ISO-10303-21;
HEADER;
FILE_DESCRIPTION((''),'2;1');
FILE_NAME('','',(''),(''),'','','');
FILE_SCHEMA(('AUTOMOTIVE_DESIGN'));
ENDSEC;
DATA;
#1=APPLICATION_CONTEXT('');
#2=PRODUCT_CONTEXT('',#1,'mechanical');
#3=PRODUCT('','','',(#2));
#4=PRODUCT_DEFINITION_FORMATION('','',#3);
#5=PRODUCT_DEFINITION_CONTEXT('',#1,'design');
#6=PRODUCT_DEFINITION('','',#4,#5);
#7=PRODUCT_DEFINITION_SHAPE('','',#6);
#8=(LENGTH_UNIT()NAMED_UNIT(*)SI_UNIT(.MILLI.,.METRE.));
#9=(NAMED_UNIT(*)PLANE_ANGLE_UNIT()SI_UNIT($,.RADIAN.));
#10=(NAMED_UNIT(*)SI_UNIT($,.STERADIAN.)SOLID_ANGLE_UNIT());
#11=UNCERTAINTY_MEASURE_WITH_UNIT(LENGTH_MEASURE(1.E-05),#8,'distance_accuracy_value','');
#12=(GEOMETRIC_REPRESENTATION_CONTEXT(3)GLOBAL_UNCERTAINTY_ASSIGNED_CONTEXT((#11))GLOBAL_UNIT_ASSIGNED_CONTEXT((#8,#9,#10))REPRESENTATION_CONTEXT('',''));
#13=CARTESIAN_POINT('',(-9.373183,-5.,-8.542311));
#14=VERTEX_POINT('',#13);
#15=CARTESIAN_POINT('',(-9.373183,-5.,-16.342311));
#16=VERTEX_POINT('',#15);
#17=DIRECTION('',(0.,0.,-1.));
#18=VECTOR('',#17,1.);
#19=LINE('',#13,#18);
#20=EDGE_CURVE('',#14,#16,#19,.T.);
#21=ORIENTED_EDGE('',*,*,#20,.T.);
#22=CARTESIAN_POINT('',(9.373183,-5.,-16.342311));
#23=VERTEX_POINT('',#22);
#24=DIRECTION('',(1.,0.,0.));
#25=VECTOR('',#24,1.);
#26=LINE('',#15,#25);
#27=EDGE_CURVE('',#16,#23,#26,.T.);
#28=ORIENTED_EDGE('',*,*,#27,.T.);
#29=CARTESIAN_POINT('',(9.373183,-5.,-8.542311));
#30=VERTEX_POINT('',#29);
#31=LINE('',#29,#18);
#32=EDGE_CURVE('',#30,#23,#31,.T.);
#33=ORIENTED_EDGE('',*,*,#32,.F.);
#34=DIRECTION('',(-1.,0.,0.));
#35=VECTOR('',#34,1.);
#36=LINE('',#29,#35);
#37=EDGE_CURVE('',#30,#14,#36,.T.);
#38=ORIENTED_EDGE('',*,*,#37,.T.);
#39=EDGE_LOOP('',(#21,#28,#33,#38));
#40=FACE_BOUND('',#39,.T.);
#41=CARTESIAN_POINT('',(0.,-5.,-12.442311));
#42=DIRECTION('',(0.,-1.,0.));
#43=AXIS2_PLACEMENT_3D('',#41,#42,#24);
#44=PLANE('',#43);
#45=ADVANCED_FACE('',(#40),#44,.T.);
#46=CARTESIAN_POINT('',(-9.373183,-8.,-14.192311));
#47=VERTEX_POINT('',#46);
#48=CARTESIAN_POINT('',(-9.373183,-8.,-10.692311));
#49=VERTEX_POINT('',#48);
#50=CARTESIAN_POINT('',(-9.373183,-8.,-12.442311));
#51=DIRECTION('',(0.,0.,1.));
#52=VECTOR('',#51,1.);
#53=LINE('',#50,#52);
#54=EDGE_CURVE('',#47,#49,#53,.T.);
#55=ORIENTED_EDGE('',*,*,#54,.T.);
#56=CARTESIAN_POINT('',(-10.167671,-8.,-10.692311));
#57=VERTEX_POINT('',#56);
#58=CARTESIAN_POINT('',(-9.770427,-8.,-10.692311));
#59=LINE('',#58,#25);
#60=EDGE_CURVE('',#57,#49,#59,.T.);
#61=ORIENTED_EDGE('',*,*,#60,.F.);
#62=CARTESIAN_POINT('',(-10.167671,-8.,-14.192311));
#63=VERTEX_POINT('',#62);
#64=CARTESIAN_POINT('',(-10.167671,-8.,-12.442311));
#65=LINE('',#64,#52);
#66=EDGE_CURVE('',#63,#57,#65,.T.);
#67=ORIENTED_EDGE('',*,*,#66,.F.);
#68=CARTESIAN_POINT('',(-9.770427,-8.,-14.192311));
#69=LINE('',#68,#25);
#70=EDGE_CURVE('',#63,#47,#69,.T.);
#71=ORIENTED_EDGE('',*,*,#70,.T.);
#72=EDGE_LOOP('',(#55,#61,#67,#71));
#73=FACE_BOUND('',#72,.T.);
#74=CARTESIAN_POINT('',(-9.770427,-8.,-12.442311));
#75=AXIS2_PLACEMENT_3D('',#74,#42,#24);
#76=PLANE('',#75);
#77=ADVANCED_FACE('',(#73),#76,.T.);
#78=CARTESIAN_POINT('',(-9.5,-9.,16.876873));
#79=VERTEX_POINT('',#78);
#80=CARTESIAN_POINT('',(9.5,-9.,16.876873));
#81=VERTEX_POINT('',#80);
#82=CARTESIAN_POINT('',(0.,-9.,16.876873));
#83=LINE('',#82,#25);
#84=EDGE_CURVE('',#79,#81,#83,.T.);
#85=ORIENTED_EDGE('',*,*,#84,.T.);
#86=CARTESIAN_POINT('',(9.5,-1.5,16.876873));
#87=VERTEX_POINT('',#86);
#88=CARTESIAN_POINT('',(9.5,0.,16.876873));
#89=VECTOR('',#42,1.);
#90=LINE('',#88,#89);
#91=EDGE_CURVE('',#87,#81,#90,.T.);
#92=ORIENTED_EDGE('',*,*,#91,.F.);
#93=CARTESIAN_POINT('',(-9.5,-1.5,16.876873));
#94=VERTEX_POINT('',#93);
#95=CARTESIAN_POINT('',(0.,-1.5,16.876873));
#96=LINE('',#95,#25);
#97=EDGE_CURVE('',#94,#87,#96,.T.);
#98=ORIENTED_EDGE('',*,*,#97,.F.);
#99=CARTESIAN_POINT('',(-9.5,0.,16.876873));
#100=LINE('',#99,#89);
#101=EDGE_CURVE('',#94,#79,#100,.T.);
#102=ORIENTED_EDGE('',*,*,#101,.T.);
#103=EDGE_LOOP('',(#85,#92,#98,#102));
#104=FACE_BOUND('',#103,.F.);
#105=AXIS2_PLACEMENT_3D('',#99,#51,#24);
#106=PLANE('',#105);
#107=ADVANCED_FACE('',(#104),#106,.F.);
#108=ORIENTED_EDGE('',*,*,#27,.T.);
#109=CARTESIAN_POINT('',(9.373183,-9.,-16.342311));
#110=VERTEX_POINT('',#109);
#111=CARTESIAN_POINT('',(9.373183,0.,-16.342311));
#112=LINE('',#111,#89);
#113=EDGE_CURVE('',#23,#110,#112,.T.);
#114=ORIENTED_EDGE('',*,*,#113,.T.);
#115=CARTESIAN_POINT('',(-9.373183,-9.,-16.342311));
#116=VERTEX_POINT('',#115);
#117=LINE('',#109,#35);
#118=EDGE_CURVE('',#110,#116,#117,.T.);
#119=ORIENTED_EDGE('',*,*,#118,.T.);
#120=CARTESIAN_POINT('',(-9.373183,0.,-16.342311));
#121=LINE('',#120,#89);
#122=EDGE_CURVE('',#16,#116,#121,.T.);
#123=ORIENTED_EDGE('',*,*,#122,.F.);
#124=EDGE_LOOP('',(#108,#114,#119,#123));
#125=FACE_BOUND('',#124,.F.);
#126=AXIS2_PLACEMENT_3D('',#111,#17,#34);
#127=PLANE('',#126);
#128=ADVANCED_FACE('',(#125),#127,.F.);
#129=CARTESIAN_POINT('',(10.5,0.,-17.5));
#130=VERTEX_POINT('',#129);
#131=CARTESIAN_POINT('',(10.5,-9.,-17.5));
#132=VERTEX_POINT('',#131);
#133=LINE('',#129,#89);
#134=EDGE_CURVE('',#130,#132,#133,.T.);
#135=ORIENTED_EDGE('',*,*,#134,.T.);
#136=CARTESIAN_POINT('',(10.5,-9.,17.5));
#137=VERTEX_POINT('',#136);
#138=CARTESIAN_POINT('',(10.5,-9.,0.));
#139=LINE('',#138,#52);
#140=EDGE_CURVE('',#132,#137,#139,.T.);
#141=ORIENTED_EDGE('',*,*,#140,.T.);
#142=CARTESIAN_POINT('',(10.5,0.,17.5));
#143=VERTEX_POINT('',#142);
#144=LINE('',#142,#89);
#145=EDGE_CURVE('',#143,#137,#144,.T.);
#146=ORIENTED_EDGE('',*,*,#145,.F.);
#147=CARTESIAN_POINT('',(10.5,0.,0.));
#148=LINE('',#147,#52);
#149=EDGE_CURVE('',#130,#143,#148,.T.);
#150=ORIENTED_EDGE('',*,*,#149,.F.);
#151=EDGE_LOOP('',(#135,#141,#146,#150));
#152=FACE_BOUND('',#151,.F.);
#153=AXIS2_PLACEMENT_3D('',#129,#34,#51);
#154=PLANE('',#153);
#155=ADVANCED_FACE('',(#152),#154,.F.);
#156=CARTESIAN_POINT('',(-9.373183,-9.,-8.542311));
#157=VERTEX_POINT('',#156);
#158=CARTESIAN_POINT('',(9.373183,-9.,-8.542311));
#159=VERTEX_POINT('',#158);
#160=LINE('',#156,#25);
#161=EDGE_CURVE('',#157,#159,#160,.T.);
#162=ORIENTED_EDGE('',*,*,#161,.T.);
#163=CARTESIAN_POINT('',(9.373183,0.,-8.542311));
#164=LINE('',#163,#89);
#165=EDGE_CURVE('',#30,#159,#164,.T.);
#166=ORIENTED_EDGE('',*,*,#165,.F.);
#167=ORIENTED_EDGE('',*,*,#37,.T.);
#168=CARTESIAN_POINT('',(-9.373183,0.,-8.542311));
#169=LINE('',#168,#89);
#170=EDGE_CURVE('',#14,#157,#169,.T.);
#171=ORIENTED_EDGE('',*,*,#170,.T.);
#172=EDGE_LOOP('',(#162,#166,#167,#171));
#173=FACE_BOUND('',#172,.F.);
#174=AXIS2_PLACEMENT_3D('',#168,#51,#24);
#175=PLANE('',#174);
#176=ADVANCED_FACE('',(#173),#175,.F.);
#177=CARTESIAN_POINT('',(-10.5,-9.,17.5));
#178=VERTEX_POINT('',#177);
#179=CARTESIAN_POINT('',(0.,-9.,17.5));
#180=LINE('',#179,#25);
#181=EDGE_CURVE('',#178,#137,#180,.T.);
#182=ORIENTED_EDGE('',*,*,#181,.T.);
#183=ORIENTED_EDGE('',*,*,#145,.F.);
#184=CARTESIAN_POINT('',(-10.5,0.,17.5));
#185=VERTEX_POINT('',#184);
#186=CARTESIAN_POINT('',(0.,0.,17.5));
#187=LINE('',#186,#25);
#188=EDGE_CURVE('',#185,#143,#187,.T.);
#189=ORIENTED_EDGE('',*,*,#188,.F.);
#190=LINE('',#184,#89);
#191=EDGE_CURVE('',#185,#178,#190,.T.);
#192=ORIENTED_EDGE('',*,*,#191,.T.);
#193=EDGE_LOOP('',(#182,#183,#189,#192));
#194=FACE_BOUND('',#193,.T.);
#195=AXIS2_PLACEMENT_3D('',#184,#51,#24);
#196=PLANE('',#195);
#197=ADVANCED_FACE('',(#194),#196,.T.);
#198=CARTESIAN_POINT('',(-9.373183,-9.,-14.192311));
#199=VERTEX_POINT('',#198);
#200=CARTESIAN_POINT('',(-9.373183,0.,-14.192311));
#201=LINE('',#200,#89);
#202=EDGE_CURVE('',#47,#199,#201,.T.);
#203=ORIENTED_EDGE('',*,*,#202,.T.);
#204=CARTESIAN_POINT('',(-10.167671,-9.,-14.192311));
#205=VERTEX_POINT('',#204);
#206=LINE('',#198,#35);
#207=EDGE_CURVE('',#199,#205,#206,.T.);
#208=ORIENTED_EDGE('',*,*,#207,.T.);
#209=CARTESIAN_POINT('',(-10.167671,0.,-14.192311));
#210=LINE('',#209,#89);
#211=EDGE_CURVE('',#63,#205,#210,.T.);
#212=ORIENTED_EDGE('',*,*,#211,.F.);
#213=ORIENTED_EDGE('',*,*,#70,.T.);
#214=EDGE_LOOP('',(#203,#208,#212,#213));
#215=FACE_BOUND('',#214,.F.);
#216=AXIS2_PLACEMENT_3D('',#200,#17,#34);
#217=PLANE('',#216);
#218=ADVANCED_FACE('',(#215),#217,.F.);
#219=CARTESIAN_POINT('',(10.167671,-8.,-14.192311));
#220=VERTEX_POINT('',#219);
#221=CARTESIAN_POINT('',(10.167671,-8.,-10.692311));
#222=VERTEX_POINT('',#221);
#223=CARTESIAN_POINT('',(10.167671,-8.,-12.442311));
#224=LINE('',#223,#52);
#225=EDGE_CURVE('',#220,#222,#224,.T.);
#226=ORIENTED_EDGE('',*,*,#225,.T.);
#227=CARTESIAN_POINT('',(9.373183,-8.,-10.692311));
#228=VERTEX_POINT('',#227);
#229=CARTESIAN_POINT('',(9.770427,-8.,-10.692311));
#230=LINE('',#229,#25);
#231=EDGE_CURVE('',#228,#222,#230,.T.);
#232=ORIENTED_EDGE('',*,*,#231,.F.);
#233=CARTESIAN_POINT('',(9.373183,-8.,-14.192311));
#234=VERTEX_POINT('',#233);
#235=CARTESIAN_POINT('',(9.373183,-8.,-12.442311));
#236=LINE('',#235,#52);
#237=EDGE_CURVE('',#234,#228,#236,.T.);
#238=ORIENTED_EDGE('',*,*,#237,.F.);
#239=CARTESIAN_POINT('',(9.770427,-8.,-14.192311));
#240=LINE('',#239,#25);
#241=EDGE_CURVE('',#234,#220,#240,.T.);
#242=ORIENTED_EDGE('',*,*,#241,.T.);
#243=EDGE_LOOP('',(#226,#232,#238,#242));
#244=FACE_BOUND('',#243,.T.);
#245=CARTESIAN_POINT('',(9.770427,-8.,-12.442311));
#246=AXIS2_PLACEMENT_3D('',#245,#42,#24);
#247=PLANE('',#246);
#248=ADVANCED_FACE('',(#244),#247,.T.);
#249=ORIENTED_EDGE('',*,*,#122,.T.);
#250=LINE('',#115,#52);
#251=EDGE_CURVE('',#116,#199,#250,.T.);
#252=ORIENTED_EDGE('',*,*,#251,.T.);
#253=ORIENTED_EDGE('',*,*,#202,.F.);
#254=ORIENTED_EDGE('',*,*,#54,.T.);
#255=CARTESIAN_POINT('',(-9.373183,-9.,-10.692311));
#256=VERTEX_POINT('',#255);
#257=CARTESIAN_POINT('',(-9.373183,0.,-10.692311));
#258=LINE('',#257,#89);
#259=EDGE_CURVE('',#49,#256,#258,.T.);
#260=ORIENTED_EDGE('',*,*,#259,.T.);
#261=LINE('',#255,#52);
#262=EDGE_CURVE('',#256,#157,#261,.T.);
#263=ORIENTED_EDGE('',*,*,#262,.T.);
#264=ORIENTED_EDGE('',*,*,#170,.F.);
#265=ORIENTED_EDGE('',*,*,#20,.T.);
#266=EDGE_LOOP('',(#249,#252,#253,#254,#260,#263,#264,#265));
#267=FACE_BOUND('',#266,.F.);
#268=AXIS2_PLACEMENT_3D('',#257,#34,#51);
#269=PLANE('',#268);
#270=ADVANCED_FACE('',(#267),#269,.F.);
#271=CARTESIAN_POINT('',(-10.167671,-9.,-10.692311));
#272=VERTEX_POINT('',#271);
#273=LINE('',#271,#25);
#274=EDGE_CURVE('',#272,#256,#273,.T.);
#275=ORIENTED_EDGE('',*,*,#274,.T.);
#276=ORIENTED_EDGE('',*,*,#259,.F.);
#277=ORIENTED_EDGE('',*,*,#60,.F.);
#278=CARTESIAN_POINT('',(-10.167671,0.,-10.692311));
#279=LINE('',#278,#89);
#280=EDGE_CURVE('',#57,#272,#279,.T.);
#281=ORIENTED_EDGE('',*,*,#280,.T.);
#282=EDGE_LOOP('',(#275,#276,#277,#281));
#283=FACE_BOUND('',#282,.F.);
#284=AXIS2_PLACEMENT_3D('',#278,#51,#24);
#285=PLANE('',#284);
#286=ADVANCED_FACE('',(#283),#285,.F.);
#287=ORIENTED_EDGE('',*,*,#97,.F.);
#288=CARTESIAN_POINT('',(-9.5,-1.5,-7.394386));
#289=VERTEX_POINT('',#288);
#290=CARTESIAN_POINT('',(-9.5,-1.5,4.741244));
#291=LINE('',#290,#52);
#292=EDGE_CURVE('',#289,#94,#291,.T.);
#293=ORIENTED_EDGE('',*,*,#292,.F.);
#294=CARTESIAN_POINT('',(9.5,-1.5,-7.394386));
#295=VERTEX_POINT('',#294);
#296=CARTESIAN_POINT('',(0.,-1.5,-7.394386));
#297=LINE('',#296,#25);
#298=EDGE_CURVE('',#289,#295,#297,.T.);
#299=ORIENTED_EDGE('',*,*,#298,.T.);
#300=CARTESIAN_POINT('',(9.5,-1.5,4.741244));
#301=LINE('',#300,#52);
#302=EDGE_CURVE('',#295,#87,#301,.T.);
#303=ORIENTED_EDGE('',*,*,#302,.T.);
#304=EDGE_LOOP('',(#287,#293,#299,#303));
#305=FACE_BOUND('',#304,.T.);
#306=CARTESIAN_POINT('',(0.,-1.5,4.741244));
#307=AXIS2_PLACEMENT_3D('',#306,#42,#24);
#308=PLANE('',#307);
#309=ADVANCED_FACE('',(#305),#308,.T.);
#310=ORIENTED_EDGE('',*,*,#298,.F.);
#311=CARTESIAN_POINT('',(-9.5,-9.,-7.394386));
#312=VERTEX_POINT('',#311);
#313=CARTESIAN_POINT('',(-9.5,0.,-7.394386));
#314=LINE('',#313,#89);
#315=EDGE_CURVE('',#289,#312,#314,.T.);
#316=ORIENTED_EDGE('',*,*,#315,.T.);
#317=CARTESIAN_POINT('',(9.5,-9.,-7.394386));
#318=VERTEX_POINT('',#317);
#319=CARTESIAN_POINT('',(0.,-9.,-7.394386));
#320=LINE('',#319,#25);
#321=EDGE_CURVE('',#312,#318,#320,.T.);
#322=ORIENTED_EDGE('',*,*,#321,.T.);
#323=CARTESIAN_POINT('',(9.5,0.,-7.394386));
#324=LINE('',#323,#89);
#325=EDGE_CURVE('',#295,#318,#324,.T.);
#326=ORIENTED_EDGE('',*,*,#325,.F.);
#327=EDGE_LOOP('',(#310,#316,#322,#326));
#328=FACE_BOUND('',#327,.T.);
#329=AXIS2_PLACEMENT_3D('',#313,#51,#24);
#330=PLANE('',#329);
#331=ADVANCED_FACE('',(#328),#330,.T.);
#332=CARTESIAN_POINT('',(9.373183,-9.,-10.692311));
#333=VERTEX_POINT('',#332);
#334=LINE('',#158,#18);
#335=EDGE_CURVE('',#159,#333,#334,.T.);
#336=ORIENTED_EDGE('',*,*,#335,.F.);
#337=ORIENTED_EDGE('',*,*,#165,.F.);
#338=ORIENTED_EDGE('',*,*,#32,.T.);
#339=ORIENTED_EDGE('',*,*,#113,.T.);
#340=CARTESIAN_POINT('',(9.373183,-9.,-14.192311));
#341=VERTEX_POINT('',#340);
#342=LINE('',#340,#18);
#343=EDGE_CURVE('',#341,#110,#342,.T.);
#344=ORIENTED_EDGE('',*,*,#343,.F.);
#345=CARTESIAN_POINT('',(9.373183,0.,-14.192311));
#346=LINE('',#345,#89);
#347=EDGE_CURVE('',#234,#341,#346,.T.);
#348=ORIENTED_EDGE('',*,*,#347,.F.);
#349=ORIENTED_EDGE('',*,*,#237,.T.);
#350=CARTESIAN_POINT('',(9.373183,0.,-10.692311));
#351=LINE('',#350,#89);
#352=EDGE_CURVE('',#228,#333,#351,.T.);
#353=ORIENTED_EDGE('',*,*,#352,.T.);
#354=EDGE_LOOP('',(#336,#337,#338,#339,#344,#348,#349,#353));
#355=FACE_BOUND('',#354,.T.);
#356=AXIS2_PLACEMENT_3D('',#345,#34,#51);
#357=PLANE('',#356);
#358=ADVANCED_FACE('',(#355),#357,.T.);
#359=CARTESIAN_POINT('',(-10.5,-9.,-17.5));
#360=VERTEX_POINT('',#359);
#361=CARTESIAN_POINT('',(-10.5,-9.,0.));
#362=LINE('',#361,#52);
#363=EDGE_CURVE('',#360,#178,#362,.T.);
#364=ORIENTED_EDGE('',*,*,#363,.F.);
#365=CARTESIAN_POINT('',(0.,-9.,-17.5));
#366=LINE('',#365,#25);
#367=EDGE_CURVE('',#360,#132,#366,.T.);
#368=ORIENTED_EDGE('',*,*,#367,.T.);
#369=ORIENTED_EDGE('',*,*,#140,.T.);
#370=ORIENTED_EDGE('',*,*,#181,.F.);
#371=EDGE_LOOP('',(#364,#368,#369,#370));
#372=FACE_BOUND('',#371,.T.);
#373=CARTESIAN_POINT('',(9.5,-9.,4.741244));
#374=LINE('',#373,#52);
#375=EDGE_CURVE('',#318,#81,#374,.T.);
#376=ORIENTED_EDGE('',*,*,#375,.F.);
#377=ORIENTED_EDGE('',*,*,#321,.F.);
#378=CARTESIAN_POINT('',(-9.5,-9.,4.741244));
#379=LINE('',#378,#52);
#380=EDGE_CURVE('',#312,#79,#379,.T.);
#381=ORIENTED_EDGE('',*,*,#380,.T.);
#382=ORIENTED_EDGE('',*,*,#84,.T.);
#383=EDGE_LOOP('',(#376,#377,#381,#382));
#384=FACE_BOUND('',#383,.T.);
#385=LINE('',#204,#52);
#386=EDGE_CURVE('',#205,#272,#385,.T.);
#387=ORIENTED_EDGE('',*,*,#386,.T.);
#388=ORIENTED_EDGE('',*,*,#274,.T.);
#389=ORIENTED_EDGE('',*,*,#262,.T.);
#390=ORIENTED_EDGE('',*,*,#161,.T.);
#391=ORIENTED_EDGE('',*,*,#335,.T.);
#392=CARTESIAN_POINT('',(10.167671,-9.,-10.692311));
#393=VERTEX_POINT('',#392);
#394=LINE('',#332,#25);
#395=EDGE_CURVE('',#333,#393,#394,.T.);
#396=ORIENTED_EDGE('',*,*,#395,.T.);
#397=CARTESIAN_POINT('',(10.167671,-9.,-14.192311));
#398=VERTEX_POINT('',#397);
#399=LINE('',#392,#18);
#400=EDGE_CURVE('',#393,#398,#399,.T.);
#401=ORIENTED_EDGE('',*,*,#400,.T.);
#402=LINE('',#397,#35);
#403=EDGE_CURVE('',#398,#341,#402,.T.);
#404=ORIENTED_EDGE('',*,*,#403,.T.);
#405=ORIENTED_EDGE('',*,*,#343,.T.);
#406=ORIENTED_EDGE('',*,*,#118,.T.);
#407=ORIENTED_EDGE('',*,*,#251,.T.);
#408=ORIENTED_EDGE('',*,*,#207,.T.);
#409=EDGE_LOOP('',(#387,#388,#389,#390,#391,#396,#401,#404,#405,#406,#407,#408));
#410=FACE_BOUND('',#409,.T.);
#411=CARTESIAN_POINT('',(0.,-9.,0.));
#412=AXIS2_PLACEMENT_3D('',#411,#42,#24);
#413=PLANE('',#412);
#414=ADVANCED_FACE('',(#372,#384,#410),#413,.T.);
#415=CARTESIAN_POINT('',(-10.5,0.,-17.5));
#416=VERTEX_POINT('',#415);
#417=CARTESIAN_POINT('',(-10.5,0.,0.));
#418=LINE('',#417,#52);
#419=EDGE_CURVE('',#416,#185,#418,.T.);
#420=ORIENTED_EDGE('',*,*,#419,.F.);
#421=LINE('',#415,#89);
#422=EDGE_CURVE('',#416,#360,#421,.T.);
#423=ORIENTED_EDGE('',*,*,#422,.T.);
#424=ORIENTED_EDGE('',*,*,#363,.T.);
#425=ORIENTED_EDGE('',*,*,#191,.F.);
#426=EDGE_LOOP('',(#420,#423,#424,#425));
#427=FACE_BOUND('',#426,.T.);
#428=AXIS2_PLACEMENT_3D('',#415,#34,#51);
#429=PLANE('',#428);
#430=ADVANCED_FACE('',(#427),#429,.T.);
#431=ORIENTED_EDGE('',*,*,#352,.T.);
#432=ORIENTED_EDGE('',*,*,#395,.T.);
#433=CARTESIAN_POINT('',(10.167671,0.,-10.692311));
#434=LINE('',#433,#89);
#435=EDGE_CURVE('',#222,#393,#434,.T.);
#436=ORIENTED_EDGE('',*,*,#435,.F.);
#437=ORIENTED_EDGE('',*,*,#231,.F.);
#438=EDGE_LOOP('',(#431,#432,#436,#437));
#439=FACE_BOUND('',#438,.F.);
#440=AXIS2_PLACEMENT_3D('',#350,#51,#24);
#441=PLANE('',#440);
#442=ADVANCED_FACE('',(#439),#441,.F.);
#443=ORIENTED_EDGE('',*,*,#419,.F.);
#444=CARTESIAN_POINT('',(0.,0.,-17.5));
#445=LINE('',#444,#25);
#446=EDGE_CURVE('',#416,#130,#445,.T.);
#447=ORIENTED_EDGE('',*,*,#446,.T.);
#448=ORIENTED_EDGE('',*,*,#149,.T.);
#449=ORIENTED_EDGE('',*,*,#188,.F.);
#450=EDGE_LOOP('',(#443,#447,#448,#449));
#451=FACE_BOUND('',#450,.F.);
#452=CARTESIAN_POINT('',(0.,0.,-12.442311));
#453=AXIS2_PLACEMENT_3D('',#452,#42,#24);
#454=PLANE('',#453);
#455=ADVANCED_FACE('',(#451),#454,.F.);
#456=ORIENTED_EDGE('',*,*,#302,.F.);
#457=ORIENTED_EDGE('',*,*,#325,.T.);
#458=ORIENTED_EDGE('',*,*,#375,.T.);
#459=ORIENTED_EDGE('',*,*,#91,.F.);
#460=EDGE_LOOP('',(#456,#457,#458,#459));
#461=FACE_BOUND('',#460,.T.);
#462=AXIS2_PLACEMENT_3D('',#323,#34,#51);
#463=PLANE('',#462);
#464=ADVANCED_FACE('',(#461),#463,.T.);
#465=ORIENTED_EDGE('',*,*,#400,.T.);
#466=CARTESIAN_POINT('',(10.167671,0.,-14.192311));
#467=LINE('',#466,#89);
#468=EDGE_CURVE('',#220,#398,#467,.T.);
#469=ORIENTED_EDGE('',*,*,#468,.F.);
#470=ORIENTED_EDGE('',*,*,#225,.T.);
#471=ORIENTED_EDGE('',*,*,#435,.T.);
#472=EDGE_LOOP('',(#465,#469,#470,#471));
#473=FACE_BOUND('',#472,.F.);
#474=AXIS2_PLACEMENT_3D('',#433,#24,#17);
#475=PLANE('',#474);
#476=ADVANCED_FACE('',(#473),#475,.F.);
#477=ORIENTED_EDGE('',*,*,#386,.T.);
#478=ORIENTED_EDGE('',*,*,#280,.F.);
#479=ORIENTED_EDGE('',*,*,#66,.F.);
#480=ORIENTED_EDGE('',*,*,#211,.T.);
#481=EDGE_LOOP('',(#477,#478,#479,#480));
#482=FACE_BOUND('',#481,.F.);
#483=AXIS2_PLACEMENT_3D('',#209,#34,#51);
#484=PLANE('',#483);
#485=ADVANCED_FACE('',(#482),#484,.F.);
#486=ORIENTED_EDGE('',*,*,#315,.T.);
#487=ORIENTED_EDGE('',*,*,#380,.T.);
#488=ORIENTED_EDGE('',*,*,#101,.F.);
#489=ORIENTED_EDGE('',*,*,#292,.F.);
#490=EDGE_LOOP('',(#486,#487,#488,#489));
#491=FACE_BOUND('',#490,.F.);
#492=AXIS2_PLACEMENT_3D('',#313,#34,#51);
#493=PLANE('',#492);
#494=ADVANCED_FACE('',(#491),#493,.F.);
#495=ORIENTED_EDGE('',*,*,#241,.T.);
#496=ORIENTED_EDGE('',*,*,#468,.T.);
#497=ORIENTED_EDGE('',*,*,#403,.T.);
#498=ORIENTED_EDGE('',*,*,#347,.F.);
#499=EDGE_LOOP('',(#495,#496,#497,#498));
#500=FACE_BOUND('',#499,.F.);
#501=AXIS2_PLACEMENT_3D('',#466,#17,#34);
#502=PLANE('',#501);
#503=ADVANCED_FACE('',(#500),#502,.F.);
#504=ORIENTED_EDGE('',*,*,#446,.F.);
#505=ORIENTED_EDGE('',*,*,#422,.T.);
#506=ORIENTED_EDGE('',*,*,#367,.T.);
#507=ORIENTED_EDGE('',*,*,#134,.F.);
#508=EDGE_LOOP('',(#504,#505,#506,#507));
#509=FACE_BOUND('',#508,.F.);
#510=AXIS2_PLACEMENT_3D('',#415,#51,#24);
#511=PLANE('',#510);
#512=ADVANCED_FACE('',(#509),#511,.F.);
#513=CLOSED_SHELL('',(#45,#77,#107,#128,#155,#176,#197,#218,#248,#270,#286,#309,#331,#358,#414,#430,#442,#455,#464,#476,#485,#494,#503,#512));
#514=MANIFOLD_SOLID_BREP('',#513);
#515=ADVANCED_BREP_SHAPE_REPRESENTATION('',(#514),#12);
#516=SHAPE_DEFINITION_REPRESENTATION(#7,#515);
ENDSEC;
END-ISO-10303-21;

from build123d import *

# Parameters (mm, degrees)
F0_W     = 21
F0_H     = 35
F0_W_2   = 19
F0_H_2   = 24.2712582345
F1_DEPTH = 9
F2_DEPTH = 1.5
F3_DEPTH = 5
F0_W_3   = 0.7944880121
F0_H_3   = 3.5
F4_DEPTH = 8


# Not quite as in the source:
# - a feature names something its author has since deleted; it is built from what else it names


with BuildPart() as f1:
    # F0 (on Front) → F1 (new body)
    with BuildSketch(Plane.XZ):
        Rectangle(F0_W, F0_H)
        Polygon((-9.3731830162, -10.6923110513), (-9.3731830162, -8.5423110513), (9.3731830162, -8.5423110513), (9.3731830162, -10.6923110513), (10.1676710284, -10.6923110513), (10.1676710284, -14.1923110513), (9.3731830162, -14.1923110513), (9.3731830162, -16.3423110513), (-9.3731830162, -16.3423110513), (-9.3731830162, -14.1923110513), (-10.1676710284, -14.1923110513), (-10.1676710284, -10.6923110513), align=None, mode=Mode.SUBTRACT)
        with Locations((0, 4.7412435117)):
            Rectangle(F0_W_2, F0_H_2, mode=Mode.SUBTRACT)
    extrude(amount=F1_DEPTH)

    # F0 (on Front) → F2 (join)
    with BuildSketch(Plane.XZ):
        with Locations((0, 4.7412435117)):
            Rectangle(F0_W_2, F0_H_2)
    extrude(amount=F2_DEPTH)

    # F0 (on Front) → F3 (join)
    with BuildSketch(Plane.XZ):
        Polygon((9.3731830162, -8.5423110513), (-9.3731830162, -8.5423110513), (-9.3731830162, -10.6923110513), (-9.3731830162, -14.1923110513), (-9.3731830162, -16.3423110513), (9.3731830162, -16.3423110513), (9.3731830162, -14.1923110513), (9.3731830162, -10.6923110513), align=None)
    extrude(amount=F3_DEPTH)

    # F0 (on Front) → F4 (join)
    with BuildSketch(Plane.XZ):
        with Locations((9.7704270223, -12.4423110513)):
            Rectangle(F0_W_3, F0_H_3)
        with Locations((-9.7704270223, -12.4423110513)):
            Rectangle(F0_W_3, F0_H_3)
    extrude(amount=F4_DEPTH)


solid = f1.part
